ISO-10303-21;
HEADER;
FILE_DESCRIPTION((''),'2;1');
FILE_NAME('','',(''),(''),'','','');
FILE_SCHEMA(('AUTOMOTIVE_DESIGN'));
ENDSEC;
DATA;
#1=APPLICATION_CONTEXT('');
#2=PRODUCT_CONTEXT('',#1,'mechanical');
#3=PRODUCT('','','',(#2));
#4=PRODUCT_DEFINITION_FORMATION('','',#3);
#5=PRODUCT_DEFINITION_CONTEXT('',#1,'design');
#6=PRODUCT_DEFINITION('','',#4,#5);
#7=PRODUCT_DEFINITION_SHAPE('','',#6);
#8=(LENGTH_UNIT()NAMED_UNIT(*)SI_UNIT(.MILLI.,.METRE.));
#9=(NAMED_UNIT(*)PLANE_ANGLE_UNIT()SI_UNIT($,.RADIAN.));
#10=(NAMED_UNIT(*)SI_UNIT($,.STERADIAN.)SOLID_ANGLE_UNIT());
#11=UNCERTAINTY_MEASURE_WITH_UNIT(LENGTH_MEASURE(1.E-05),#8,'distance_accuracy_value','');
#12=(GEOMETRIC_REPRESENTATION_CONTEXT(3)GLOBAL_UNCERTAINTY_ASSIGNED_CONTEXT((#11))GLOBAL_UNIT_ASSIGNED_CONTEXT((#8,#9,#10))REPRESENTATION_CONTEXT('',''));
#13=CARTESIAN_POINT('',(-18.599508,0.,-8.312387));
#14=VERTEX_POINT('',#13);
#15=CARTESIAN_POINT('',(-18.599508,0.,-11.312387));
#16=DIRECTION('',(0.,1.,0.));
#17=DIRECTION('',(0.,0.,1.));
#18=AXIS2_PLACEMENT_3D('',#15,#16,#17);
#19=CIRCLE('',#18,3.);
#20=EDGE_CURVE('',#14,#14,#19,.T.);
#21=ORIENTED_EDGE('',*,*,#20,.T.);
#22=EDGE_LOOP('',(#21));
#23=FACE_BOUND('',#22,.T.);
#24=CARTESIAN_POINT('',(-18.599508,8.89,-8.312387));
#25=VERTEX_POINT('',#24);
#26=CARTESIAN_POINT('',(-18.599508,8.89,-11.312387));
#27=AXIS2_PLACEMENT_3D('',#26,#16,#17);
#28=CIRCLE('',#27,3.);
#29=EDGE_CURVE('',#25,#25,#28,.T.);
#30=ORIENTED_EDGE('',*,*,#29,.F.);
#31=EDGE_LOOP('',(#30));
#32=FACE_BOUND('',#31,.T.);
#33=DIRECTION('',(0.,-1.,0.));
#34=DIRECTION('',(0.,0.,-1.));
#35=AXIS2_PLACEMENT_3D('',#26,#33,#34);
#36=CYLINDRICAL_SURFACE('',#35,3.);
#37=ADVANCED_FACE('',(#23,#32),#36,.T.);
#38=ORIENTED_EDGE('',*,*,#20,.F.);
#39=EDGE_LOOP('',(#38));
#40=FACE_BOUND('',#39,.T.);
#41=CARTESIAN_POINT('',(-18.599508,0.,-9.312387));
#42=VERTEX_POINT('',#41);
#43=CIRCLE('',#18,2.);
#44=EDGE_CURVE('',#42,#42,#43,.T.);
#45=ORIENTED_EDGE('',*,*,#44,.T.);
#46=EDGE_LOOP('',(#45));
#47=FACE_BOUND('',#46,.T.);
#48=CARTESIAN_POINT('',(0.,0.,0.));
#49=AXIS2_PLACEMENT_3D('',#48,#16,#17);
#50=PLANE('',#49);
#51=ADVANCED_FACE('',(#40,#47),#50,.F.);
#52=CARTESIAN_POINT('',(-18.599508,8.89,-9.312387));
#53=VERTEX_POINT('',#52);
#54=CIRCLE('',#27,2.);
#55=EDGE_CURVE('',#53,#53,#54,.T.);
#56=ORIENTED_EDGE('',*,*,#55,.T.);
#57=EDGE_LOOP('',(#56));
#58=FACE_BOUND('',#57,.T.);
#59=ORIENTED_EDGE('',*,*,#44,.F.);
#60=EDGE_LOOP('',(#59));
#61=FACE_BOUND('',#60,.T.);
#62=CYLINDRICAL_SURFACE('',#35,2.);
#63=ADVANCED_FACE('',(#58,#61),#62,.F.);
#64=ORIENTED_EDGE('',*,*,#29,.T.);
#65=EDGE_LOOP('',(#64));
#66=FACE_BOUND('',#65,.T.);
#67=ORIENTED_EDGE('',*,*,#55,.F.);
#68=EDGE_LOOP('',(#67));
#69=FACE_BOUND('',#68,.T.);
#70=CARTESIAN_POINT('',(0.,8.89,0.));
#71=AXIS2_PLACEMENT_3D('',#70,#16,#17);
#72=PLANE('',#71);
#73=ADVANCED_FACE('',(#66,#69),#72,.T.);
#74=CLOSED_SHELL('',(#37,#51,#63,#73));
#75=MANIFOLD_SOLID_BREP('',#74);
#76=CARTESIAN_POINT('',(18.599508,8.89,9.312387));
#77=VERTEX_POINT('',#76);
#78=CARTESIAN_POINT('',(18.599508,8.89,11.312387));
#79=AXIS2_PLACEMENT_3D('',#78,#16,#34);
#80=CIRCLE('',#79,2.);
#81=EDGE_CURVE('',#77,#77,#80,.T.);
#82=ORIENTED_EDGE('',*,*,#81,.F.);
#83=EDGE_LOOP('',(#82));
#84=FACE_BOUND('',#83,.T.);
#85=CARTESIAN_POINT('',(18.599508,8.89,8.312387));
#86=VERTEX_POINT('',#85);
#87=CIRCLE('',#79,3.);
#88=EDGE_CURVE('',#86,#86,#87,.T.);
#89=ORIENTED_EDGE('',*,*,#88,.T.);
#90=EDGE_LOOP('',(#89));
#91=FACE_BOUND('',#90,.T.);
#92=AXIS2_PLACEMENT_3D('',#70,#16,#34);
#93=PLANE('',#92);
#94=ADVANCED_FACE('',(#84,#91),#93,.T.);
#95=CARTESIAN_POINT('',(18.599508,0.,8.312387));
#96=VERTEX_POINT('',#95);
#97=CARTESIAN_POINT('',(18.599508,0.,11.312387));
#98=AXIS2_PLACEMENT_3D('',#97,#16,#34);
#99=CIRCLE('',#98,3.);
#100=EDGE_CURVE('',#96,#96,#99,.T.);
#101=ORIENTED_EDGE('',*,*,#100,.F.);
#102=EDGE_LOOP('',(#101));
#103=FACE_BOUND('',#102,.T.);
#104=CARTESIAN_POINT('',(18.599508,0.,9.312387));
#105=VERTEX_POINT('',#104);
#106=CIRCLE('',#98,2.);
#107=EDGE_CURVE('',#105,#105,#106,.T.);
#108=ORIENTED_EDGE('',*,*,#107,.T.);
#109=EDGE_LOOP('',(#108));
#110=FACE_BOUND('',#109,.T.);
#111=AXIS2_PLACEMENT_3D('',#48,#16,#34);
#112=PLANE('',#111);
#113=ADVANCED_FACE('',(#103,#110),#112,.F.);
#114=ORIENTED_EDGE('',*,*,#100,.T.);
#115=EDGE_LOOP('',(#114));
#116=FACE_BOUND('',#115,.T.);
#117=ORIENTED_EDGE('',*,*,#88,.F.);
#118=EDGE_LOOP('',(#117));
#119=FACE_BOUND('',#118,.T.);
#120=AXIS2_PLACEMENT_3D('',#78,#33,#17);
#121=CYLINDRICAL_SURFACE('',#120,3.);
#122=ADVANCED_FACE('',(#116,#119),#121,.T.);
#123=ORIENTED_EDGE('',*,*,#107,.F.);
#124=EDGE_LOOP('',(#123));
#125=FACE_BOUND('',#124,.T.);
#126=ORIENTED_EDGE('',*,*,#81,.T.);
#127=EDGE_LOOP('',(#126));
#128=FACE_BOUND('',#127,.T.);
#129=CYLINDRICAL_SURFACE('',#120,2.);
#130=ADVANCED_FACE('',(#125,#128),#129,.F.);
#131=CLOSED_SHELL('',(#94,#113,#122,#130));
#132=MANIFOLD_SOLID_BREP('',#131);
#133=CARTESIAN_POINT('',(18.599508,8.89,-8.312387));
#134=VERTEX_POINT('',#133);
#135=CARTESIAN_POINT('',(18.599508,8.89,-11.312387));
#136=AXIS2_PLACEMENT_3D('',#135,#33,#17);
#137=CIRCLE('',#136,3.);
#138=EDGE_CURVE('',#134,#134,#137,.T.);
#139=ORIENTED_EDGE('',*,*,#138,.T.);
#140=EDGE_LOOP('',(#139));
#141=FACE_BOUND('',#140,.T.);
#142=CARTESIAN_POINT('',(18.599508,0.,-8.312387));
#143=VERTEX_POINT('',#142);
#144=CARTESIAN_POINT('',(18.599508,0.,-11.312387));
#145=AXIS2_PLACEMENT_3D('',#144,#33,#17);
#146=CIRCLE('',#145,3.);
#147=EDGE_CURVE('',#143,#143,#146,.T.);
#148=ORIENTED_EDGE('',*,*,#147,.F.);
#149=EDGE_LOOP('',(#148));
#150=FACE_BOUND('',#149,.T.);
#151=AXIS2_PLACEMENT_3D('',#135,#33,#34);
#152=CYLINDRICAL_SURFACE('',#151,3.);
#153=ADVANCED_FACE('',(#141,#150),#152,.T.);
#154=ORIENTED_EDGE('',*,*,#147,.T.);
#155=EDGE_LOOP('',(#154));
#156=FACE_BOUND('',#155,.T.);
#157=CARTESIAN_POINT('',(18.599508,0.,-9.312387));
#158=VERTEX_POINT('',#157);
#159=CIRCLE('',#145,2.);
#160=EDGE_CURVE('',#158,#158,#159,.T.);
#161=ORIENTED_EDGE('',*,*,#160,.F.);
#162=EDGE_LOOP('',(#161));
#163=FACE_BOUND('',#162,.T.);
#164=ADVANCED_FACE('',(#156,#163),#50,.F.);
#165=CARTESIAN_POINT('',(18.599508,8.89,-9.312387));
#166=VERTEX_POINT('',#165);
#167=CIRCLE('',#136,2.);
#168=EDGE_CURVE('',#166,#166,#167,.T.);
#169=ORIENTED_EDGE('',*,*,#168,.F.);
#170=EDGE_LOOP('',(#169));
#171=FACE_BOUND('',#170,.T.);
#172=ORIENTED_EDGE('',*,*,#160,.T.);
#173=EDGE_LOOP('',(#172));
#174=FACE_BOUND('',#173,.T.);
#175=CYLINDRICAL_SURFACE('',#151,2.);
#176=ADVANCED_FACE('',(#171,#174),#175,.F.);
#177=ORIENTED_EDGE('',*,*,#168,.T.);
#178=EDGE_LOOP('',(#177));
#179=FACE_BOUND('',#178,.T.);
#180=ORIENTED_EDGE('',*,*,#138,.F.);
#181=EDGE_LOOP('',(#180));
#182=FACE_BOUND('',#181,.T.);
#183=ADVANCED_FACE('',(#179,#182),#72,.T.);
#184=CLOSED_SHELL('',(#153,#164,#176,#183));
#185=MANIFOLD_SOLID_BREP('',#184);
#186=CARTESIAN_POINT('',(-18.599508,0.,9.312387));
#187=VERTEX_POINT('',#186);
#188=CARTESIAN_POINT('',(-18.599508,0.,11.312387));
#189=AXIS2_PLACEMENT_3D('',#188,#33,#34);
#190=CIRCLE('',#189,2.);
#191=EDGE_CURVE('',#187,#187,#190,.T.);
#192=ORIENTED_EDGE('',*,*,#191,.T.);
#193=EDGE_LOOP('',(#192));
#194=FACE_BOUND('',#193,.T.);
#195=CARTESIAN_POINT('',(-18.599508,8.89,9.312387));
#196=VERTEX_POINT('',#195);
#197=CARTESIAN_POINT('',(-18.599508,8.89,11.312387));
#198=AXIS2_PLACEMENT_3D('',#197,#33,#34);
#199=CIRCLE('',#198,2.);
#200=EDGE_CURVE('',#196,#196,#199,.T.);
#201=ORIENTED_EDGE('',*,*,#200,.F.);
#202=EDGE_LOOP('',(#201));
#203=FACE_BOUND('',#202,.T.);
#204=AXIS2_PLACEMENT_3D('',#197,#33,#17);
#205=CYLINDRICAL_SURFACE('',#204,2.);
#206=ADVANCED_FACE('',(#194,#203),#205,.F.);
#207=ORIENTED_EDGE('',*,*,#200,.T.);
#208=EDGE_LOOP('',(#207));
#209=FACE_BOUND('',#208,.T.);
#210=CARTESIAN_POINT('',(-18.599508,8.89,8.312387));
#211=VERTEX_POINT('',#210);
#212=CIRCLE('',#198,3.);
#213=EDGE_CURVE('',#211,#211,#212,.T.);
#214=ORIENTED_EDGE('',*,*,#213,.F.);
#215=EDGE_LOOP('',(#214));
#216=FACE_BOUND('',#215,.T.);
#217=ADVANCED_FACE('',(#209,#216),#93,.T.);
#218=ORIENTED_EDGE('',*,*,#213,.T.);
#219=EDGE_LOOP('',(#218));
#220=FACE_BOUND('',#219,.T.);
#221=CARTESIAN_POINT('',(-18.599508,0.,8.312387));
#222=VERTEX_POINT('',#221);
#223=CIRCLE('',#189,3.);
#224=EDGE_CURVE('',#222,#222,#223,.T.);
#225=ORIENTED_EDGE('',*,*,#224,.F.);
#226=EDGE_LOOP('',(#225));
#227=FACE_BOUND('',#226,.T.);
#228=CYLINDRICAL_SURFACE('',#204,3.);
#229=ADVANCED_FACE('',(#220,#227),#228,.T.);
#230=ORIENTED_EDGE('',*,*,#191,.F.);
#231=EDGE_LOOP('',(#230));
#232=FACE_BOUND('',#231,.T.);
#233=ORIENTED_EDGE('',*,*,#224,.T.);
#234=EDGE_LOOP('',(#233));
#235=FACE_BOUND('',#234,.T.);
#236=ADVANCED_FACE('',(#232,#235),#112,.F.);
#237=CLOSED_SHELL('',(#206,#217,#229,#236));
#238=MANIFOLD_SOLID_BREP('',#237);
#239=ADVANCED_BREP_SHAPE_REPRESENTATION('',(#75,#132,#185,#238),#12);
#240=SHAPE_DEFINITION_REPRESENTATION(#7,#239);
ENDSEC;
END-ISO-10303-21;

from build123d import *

# Parameters (mm, degrees)
BOSS_EXTRUDE2_DEPTH = 8.89
MIRROR4_OUTLINE_R   = 3
MIRROR4_OUTLINE_R_2 = 2
MIRROR4_DEPTH       = 8.89


# Read off the part's stored shape, not the designer's step: Mirror4
with BuildPart() as part:
    # Sketch1 → Boss-Extrude2 (new body)
    with BuildSketch(Plane(origin=(0, 0, 0), x_dir=(1, 0, 0), z_dir=(0, 1, 0))):
        with BuildLine():
            ThreePointArc((-18.599507831, 9.312387225), (-20.013721393, 12.726600788), (-16.599507831, 11.312387225))
            Line((-16.599507831, 11.312387225), (-15.599507831, 11.312387225))
            ThreePointArc((-15.599507831, 11.312387225), (-20.720828174, 13.433707569), (-18.599507831, 8.312387225))
            Line((-18.599507831, 8.312387225), (-18.599507831, 9.312387225))
        make_face()
        with BuildLine():
            Line((-15.599507831, 11.312387225), (-16.599507831, 11.312387225))
            ThreePointArc((-16.599507831, 11.312387225), (-17.185294268, 9.898173663), (-18.599507831, 9.312387225))
            Line((-18.599507831, 9.312387225), (-18.599507831, 8.312387225))
            ThreePointArc((-18.599507831, 8.312387225), (-16.478187487, 9.191066882), (-15.599507831, 11.312387225))
        make_face()
    extrude(amount=BOSS_EXTRUDE2_DEPTH)


with BuildPart() as body_2:
    # Mirror4 outline → Mirror4 (new body)
    # profile 1 of 3: a face of its own
    with BuildSketch(Plane(origin=(0, 0, 0), x_dir=(1, 0, 0), z_dir=(0, 1, 0))):
        with Locations((18.599507831, -11.312387225)):
            Circle(MIRROR4_OUTLINE_R)
        with Locations((18.599507831, -11.312387225)):
            Circle(MIRROR4_OUTLINE_R_2, mode=Mode.SUBTRACT)
    # profile 2 of 3: a face of its own
    with BuildSketch(Plane(origin=(0, 0, 0), x_dir=(1, 0, 0), z_dir=(0, 1, 0))):
        with Locations((18.599507831, 11.312387225)):
            Circle(MIRROR4_OUTLINE_R)
        with Locations((18.599507831, 11.312387225)):
            Circle(MIRROR4_OUTLINE_R_2, mode=Mode.SUBTRACT)
    # profile 3 of 3: a face of its own
    with BuildSketch(Plane(origin=(0, 0, 0), x_dir=(1, 0, 0), z_dir=(0, 1, 0))):
        with Locations((-18.599507831, -11.312387225)):
            Circle(MIRROR4_OUTLINE_R)
        with Locations((-18.599507831, -11.312387225)):
            Circle(MIRROR4_OUTLINE_R_2, mode=Mode.SUBTRACT)
    extrude(amount=MIRROR4_DEPTH)


solid = Compound([part.part, body_2.part])
